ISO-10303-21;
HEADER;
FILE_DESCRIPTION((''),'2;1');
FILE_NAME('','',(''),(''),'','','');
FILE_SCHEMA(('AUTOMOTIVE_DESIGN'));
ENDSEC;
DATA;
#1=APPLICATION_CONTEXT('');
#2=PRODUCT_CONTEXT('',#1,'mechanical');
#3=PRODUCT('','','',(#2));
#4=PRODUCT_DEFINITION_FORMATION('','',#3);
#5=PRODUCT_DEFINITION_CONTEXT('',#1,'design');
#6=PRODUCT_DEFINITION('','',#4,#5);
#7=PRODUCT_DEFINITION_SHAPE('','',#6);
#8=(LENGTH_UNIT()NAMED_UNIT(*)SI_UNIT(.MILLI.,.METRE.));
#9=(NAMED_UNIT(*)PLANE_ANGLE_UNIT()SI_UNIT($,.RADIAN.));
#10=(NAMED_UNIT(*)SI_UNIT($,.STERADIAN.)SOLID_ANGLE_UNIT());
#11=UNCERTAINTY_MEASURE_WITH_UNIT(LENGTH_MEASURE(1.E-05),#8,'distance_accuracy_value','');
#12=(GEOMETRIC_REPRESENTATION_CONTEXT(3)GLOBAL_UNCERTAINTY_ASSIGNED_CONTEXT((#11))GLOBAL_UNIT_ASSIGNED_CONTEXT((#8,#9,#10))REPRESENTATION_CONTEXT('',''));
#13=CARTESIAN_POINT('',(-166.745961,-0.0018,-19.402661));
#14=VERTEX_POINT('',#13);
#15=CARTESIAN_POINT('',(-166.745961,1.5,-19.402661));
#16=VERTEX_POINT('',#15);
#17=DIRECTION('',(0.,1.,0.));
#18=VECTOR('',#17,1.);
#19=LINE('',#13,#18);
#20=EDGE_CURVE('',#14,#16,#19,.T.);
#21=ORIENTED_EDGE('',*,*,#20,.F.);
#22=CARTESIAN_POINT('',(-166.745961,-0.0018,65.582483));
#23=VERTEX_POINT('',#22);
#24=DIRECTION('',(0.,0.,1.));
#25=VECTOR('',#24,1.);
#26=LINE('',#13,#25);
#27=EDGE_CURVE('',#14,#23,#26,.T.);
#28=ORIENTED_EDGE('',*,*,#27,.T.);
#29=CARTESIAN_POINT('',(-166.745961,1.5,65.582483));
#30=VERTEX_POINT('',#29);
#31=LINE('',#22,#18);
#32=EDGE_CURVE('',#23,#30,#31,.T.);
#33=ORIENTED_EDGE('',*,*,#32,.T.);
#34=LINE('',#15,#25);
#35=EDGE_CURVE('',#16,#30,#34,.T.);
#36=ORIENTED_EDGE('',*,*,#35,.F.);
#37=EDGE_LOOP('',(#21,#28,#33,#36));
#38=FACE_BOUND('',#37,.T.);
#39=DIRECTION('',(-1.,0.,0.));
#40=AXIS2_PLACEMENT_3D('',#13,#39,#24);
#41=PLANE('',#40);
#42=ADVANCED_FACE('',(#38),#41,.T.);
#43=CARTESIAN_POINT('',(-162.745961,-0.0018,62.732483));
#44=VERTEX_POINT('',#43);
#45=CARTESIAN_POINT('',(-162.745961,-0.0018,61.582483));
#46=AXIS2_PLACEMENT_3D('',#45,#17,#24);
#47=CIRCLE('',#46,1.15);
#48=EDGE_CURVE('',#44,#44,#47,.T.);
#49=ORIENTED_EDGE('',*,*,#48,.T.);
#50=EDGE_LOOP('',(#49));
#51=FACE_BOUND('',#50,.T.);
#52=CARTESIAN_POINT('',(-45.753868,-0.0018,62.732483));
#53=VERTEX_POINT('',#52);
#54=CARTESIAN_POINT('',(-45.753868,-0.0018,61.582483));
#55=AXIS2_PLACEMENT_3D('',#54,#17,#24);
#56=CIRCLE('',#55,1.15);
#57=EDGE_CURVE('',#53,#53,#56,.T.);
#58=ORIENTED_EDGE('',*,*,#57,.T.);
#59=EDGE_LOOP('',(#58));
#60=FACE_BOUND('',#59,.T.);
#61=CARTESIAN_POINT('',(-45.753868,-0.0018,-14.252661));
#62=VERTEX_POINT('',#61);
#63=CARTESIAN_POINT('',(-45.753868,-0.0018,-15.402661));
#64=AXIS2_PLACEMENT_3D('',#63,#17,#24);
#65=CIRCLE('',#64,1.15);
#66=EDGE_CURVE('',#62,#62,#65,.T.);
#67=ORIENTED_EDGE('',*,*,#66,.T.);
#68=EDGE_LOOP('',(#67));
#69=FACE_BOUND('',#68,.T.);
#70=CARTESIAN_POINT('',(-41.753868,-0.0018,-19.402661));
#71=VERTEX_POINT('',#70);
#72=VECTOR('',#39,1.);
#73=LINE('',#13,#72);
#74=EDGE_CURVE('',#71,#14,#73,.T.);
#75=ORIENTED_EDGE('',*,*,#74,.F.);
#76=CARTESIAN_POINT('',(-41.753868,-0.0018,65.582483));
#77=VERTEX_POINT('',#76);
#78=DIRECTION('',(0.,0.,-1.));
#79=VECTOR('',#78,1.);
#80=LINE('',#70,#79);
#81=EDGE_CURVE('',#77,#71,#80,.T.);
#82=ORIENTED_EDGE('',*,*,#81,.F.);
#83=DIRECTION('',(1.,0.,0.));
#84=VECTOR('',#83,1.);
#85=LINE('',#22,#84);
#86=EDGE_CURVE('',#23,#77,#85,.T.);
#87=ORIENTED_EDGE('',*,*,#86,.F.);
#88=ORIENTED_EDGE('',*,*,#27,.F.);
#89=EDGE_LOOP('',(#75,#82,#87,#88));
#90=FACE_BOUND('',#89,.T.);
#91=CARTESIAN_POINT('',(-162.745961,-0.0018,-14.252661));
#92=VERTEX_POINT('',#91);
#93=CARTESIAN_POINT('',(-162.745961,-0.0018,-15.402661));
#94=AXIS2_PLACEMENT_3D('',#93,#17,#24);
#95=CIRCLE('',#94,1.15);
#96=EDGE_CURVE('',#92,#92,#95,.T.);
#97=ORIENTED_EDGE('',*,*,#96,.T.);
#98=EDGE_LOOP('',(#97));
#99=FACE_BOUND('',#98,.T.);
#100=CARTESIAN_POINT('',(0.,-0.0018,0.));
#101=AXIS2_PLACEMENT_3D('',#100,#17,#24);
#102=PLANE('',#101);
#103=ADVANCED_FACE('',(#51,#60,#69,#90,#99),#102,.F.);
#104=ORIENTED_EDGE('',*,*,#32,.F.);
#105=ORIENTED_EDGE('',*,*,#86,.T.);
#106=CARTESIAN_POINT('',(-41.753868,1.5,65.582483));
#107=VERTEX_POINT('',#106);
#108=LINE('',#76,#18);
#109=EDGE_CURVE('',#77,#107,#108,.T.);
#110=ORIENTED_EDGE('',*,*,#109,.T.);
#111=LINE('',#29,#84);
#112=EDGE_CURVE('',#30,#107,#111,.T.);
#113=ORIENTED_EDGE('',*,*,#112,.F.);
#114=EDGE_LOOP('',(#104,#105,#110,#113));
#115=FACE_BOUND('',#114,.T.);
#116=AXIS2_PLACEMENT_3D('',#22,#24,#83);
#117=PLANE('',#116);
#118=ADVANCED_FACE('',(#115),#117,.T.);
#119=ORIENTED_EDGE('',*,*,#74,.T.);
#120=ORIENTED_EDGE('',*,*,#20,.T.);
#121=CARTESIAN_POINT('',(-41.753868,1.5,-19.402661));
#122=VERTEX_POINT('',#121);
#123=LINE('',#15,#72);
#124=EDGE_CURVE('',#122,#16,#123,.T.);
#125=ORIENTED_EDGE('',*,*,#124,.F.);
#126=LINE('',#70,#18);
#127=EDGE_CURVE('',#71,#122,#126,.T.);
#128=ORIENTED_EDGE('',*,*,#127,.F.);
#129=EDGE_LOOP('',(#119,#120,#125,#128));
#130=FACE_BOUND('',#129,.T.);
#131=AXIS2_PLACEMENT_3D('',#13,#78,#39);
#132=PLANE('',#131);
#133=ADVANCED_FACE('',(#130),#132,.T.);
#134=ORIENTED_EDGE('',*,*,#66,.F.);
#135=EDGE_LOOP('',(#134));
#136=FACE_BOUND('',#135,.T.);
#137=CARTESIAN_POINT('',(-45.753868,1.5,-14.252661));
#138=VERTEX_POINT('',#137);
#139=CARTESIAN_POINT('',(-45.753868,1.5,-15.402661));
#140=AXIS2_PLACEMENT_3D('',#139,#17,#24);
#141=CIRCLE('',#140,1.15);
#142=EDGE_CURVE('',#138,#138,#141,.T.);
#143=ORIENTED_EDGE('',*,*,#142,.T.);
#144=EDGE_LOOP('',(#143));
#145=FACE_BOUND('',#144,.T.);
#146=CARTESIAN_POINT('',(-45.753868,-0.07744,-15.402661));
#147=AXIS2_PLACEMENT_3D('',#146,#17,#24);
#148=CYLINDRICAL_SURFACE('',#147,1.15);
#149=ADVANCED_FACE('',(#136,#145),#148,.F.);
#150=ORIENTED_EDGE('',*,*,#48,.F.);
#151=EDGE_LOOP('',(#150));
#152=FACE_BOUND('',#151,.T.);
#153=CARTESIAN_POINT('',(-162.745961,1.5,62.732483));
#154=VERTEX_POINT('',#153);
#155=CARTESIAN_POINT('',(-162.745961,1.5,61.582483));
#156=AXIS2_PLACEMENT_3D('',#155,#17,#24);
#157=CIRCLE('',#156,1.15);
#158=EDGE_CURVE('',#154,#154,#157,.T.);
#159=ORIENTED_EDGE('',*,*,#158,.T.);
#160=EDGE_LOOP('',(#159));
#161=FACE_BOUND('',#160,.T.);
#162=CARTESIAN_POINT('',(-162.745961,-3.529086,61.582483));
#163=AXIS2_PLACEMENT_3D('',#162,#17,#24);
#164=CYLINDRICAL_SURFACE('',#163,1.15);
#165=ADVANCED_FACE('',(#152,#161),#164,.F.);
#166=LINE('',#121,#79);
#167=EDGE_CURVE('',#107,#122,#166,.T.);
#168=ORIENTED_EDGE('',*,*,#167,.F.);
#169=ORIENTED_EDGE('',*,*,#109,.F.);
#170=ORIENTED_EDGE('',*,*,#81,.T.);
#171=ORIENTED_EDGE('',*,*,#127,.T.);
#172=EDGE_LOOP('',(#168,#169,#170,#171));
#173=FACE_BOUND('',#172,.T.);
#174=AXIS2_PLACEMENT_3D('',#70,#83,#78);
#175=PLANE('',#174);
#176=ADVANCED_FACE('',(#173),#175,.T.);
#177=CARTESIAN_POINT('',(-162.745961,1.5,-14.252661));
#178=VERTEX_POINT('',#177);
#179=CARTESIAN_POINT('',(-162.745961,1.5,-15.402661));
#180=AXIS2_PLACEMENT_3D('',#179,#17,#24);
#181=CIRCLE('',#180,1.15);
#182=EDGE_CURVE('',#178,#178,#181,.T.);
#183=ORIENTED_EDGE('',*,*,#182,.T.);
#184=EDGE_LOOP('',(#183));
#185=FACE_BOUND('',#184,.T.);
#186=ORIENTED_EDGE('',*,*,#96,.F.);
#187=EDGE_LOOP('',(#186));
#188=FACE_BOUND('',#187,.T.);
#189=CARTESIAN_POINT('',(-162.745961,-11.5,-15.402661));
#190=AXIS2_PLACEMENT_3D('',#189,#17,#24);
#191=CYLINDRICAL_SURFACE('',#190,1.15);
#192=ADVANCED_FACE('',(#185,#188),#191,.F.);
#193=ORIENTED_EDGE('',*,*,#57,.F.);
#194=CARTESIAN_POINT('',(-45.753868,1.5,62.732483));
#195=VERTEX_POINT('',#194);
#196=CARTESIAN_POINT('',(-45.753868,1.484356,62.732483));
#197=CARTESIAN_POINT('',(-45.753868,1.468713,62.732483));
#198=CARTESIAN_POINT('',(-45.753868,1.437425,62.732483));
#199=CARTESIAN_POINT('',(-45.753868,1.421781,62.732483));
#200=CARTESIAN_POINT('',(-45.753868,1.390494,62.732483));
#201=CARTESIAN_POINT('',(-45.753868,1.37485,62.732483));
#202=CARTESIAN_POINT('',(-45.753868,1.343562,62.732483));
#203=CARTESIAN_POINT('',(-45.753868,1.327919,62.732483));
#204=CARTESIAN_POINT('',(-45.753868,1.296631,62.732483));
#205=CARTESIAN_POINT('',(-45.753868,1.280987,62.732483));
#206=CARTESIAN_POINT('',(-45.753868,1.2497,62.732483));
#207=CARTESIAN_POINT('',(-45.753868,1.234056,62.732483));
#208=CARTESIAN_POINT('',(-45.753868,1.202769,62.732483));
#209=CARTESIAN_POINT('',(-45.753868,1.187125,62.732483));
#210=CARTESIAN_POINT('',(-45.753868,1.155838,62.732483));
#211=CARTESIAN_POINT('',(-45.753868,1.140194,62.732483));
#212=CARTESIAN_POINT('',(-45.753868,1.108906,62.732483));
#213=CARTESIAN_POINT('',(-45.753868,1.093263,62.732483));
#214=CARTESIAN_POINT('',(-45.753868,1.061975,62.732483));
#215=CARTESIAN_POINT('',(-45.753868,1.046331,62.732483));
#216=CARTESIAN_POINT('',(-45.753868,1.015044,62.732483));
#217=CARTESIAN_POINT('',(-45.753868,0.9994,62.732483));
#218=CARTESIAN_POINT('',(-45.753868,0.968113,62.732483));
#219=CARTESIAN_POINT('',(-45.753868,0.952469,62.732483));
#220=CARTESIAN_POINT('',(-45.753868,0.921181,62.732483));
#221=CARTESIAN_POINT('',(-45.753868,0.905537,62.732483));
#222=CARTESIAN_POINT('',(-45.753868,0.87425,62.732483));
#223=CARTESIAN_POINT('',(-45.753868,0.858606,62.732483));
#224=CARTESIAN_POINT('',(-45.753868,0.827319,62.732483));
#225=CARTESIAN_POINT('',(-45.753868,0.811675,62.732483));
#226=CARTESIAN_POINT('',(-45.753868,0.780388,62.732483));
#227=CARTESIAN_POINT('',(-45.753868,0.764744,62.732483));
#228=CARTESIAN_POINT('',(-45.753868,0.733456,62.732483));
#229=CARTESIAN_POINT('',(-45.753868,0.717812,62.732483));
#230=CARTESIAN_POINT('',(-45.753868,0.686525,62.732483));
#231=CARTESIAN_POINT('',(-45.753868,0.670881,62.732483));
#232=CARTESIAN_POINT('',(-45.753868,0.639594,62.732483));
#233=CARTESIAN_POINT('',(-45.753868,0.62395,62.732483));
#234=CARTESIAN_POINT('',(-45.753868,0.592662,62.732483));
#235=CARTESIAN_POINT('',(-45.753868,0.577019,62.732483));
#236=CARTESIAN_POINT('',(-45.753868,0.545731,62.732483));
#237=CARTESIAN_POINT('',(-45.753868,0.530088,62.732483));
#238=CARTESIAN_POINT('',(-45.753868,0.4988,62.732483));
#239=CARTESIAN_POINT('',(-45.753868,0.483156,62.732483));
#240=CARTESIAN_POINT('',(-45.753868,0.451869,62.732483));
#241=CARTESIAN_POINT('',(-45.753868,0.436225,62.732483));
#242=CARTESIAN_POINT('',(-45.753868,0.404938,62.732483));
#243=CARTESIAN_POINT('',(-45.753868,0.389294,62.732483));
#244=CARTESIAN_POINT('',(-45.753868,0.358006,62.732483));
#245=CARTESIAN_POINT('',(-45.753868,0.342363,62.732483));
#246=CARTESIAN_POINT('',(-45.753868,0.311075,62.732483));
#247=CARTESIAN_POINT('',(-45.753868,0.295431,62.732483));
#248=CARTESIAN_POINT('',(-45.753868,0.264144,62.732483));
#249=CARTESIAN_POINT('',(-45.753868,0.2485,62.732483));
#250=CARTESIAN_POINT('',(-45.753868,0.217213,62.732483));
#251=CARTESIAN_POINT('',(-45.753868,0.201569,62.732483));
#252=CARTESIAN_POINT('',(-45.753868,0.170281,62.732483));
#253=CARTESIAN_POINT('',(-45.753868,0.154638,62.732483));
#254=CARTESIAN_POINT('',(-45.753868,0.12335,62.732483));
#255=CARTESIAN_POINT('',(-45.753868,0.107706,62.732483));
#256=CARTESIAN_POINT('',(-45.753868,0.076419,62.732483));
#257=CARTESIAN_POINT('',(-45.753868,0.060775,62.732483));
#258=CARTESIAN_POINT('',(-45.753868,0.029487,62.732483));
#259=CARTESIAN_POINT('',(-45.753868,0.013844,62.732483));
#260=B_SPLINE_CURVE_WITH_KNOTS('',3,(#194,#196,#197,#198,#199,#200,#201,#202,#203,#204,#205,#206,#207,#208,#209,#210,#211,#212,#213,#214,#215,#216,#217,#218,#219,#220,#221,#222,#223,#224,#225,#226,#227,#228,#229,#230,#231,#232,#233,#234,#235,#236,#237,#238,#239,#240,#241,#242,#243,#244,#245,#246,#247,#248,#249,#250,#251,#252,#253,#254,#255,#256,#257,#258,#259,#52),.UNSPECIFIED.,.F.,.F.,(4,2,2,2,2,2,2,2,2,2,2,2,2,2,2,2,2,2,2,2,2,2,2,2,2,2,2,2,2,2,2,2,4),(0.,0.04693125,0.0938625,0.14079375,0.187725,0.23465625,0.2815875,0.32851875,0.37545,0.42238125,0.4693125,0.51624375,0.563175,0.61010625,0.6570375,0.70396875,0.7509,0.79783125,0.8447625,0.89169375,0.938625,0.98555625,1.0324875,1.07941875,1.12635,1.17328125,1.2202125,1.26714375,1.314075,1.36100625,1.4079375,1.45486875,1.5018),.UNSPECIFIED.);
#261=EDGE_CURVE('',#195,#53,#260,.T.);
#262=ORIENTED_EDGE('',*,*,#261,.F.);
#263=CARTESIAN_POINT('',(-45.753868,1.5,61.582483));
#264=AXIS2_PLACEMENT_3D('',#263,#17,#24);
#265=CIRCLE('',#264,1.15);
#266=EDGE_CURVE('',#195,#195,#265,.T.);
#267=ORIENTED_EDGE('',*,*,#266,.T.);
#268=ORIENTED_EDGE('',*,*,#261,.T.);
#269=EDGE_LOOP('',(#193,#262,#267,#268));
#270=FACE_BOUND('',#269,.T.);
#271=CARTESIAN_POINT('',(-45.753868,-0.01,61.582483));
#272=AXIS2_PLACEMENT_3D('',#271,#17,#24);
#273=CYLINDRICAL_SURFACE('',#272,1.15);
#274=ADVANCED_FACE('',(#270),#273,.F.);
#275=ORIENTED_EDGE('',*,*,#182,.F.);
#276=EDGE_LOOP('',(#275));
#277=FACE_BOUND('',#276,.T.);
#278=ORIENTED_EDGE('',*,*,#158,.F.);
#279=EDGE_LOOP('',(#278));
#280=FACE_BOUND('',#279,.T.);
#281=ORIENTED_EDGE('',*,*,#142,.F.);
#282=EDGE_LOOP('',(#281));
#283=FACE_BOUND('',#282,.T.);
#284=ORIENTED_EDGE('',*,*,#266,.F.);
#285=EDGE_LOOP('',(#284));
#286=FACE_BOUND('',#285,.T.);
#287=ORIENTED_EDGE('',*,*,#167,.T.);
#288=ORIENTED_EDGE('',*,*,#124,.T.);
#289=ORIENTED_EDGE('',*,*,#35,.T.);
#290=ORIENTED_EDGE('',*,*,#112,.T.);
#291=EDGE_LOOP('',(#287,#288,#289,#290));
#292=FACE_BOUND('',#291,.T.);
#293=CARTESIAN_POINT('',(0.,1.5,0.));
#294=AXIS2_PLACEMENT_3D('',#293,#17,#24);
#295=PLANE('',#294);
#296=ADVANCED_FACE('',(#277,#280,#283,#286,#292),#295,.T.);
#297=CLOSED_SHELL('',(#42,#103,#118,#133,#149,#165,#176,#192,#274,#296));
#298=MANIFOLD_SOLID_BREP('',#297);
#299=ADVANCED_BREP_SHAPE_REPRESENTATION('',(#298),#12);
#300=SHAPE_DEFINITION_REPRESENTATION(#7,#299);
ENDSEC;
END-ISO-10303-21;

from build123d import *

# Parameters (mm, degrees)
BOSS_EXTRU_1_DEPTH      = 1.5
BOSS_EXTRU_1_DEPTH_BACK = 0.0018
ESQUISSE1_W             = 124.992092973
ESQUISSE1_H             = 84.985144333
BOSS_EXTRU_5_START      = -1.5018
BOSS_EXTRU_5_OUTLINE_R  = 1.15
BOSS_EXTRU_5_DEPTH      = 1.5018
ESQUISSE5_R             = 1.15
ENL_V_MAT_EXTRU_1_DEPTH = 13
ESQUISSE6_R             = 1.15
ENL_V_MAT_EXTRU_2_DEPTH = 1.577439541
ESQUISSE7_R             = 1.15
ENL_V_MAT_EXTRU_3_DEPTH = 1.51


# Read off the part's stored shape, not the designer's step: Boss.-Extru.5
with BuildPart() as part:
    # Esquisse1 → Boss.-Extru.1 (new, two sides: drawn at the far end of the back side and taken through both)
    with BuildSketch(Plane(origin=(0, 0, 0), x_dir=(1, 0, 0), z_dir=(0, 1, 0)).offset(-BOSS_EXTRU_1_DEPTH_BACK)):
        with Locations((-104.249914402, -23.089910991)):
            Rectangle(ESQUISSE1_W, ESQUISSE1_H)
    extrude(amount=BOSS_EXTRU_1_DEPTH + BOSS_EXTRU_1_DEPTH_BACK)

    # Boss.-Extru.5 outline → Boss.-Extru.5 (cut)
    with BuildSketch(Plane(origin=(0, 1.5, 0), x_dir=(1, 0, 0), z_dir=(0, 1, 0)).offset(BOSS_EXTRU_5_START)):
        with Locations((-162.745960889, -61.582483158)):
            Circle(BOSS_EXTRU_5_OUTLINE_R)
    extrude(amount=BOSS_EXTRU_5_DEPTH, mode=Mode.SUBTRACT)

    # Esquisse5 → Enlèv. mat.-Extru.1 (cut)
    with BuildSketch(Plane(origin=(0, 1.5, 0), x_dir=(1, 0, 0), z_dir=(0, 1, 0))):
        with Locations(Location((-162.745960889, 15.402661175, 0), (0, 0, 270))):
            Circle(ESQUISSE5_R)
    extrude(amount=-ENL_V_MAT_EXTRU_1_DEPTH, mode=Mode.SUBTRACT)

    # Esquisse6 → Enlèv. mat.-Extru.2 (cut)
    with BuildSketch(Plane(origin=(0, 1.5, 0), x_dir=(1, 0, 0), z_dir=(0, 1, 0))):
        with Locations(Location((-45.753867916, 15.402661175, 0), (0, 0, 270))):
            Circle(ESQUISSE6_R)
    extrude(amount=-ENL_V_MAT_EXTRU_2_DEPTH, mode=Mode.SUBTRACT)

    # Esquisse7 → Enlèv. mat.-Extru.3 (cut)
    with BuildSketch(Plane(origin=(0, 1.5, 0), x_dir=(1, 0, 0), z_dir=(0, 1, 0))):
        with Locations(Location((-45.753867916, -61.582483158, 0), (0, 0, 270))):
            Circle(ESQUISSE7_R)
    extrude(amount=-ENL_V_MAT_EXTRU_3_DEPTH, mode=Mode.SUBTRACT)


solid = part.part
